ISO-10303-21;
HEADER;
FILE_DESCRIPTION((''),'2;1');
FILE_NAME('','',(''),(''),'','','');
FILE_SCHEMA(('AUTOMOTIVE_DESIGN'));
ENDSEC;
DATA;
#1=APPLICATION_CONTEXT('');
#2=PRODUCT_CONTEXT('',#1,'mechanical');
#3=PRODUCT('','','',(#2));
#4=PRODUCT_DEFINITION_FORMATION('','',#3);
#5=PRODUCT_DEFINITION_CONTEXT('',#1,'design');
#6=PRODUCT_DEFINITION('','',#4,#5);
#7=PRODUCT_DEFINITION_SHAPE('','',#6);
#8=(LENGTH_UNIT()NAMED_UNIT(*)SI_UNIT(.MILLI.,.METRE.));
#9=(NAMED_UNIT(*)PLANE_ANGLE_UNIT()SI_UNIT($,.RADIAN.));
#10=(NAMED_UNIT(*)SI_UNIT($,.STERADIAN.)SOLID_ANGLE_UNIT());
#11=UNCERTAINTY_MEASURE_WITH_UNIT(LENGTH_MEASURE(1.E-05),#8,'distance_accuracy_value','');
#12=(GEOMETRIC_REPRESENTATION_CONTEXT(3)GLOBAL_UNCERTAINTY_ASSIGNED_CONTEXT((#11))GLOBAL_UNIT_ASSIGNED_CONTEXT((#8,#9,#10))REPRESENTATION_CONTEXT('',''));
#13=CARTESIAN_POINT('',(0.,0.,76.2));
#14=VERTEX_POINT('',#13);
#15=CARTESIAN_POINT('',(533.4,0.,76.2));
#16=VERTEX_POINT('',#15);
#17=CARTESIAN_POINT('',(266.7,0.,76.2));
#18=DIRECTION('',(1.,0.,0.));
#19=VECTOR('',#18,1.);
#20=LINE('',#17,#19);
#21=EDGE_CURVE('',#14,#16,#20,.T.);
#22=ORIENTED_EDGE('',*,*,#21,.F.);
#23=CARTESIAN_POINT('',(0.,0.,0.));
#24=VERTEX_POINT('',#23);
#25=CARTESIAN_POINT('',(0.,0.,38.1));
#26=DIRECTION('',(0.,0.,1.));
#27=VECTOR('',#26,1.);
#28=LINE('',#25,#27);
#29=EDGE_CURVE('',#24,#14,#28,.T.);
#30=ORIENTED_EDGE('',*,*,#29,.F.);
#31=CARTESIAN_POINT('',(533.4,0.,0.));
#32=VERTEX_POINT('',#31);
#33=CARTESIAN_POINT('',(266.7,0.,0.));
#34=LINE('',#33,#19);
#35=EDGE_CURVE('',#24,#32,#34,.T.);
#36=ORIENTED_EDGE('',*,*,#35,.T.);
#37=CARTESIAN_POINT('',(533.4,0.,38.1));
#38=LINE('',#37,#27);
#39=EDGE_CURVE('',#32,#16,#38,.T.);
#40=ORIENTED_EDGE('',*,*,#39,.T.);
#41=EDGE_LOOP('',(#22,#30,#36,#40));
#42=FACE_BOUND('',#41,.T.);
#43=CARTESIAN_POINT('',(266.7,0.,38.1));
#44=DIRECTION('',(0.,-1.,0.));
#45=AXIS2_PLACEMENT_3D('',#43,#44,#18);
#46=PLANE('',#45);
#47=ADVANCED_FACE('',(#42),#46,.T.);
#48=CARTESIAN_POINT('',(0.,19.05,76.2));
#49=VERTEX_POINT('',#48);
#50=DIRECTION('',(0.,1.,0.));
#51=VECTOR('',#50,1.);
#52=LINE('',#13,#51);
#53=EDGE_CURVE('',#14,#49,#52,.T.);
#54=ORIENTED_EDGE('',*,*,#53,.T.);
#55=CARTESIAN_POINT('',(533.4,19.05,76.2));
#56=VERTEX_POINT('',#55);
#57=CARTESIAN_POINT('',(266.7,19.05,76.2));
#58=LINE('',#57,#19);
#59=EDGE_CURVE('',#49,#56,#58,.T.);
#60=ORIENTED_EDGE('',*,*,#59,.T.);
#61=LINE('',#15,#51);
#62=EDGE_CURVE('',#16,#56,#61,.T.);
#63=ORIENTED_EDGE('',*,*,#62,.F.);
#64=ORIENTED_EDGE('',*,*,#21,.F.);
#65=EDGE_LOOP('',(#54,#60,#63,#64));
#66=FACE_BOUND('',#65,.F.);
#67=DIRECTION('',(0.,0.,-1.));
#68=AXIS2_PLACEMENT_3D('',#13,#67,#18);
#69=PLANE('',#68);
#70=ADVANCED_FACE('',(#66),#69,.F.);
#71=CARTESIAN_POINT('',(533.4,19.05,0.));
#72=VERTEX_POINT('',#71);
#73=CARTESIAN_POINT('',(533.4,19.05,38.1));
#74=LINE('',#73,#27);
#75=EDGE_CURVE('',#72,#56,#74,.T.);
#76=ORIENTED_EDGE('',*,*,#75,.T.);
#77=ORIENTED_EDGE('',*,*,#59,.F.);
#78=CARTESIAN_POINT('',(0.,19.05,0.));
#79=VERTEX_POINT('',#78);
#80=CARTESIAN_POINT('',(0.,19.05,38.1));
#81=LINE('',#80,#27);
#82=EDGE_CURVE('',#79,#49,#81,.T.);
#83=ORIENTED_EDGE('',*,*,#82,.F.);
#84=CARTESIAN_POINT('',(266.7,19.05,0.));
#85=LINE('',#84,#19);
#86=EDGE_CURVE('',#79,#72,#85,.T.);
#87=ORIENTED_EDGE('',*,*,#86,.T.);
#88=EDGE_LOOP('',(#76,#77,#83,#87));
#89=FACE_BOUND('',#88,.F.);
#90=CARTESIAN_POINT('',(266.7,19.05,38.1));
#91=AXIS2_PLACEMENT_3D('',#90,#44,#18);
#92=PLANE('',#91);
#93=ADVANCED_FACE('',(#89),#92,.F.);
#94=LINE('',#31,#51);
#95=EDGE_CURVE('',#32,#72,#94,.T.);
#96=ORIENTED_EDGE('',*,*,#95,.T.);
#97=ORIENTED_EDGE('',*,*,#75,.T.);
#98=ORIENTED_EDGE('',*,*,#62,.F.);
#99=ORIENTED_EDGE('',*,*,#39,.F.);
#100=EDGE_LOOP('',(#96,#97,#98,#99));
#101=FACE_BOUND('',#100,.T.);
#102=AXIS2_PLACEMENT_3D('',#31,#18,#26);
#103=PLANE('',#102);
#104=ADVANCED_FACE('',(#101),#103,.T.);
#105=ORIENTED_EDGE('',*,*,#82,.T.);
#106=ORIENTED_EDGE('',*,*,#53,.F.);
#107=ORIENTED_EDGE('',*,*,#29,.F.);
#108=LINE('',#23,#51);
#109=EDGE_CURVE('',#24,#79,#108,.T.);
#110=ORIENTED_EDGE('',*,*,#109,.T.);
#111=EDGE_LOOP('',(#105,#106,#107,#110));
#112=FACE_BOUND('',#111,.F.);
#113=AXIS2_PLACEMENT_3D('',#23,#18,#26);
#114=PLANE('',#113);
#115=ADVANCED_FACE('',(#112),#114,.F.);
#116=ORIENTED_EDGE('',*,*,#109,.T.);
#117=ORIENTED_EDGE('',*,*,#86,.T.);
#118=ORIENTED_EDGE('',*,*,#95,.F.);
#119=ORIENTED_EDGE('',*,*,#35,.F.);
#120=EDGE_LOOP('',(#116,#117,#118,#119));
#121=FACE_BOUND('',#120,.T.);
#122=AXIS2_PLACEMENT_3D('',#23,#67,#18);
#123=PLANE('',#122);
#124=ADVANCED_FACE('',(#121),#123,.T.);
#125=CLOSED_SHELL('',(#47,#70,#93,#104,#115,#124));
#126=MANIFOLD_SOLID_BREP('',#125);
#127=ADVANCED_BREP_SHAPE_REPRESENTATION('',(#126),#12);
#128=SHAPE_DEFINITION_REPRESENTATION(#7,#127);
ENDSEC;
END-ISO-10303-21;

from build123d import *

# Parameters (mm, degrees)
F0_W     = 533.4
F0_H     = 76.2
F1_DEPTH = 19.05


# Not quite as in the source:
# - a feature names something its author has since deleted; it is built from what else it names


with BuildPart() as f1:
    # F0 (on Front) → F1 (new body)
    with BuildSketch(Plane.XZ):
        with Locations((266.7, 38.1)):
            Rectangle(F0_W, F0_H)
    extrude(amount=-F1_DEPTH)


solid = f1.part
